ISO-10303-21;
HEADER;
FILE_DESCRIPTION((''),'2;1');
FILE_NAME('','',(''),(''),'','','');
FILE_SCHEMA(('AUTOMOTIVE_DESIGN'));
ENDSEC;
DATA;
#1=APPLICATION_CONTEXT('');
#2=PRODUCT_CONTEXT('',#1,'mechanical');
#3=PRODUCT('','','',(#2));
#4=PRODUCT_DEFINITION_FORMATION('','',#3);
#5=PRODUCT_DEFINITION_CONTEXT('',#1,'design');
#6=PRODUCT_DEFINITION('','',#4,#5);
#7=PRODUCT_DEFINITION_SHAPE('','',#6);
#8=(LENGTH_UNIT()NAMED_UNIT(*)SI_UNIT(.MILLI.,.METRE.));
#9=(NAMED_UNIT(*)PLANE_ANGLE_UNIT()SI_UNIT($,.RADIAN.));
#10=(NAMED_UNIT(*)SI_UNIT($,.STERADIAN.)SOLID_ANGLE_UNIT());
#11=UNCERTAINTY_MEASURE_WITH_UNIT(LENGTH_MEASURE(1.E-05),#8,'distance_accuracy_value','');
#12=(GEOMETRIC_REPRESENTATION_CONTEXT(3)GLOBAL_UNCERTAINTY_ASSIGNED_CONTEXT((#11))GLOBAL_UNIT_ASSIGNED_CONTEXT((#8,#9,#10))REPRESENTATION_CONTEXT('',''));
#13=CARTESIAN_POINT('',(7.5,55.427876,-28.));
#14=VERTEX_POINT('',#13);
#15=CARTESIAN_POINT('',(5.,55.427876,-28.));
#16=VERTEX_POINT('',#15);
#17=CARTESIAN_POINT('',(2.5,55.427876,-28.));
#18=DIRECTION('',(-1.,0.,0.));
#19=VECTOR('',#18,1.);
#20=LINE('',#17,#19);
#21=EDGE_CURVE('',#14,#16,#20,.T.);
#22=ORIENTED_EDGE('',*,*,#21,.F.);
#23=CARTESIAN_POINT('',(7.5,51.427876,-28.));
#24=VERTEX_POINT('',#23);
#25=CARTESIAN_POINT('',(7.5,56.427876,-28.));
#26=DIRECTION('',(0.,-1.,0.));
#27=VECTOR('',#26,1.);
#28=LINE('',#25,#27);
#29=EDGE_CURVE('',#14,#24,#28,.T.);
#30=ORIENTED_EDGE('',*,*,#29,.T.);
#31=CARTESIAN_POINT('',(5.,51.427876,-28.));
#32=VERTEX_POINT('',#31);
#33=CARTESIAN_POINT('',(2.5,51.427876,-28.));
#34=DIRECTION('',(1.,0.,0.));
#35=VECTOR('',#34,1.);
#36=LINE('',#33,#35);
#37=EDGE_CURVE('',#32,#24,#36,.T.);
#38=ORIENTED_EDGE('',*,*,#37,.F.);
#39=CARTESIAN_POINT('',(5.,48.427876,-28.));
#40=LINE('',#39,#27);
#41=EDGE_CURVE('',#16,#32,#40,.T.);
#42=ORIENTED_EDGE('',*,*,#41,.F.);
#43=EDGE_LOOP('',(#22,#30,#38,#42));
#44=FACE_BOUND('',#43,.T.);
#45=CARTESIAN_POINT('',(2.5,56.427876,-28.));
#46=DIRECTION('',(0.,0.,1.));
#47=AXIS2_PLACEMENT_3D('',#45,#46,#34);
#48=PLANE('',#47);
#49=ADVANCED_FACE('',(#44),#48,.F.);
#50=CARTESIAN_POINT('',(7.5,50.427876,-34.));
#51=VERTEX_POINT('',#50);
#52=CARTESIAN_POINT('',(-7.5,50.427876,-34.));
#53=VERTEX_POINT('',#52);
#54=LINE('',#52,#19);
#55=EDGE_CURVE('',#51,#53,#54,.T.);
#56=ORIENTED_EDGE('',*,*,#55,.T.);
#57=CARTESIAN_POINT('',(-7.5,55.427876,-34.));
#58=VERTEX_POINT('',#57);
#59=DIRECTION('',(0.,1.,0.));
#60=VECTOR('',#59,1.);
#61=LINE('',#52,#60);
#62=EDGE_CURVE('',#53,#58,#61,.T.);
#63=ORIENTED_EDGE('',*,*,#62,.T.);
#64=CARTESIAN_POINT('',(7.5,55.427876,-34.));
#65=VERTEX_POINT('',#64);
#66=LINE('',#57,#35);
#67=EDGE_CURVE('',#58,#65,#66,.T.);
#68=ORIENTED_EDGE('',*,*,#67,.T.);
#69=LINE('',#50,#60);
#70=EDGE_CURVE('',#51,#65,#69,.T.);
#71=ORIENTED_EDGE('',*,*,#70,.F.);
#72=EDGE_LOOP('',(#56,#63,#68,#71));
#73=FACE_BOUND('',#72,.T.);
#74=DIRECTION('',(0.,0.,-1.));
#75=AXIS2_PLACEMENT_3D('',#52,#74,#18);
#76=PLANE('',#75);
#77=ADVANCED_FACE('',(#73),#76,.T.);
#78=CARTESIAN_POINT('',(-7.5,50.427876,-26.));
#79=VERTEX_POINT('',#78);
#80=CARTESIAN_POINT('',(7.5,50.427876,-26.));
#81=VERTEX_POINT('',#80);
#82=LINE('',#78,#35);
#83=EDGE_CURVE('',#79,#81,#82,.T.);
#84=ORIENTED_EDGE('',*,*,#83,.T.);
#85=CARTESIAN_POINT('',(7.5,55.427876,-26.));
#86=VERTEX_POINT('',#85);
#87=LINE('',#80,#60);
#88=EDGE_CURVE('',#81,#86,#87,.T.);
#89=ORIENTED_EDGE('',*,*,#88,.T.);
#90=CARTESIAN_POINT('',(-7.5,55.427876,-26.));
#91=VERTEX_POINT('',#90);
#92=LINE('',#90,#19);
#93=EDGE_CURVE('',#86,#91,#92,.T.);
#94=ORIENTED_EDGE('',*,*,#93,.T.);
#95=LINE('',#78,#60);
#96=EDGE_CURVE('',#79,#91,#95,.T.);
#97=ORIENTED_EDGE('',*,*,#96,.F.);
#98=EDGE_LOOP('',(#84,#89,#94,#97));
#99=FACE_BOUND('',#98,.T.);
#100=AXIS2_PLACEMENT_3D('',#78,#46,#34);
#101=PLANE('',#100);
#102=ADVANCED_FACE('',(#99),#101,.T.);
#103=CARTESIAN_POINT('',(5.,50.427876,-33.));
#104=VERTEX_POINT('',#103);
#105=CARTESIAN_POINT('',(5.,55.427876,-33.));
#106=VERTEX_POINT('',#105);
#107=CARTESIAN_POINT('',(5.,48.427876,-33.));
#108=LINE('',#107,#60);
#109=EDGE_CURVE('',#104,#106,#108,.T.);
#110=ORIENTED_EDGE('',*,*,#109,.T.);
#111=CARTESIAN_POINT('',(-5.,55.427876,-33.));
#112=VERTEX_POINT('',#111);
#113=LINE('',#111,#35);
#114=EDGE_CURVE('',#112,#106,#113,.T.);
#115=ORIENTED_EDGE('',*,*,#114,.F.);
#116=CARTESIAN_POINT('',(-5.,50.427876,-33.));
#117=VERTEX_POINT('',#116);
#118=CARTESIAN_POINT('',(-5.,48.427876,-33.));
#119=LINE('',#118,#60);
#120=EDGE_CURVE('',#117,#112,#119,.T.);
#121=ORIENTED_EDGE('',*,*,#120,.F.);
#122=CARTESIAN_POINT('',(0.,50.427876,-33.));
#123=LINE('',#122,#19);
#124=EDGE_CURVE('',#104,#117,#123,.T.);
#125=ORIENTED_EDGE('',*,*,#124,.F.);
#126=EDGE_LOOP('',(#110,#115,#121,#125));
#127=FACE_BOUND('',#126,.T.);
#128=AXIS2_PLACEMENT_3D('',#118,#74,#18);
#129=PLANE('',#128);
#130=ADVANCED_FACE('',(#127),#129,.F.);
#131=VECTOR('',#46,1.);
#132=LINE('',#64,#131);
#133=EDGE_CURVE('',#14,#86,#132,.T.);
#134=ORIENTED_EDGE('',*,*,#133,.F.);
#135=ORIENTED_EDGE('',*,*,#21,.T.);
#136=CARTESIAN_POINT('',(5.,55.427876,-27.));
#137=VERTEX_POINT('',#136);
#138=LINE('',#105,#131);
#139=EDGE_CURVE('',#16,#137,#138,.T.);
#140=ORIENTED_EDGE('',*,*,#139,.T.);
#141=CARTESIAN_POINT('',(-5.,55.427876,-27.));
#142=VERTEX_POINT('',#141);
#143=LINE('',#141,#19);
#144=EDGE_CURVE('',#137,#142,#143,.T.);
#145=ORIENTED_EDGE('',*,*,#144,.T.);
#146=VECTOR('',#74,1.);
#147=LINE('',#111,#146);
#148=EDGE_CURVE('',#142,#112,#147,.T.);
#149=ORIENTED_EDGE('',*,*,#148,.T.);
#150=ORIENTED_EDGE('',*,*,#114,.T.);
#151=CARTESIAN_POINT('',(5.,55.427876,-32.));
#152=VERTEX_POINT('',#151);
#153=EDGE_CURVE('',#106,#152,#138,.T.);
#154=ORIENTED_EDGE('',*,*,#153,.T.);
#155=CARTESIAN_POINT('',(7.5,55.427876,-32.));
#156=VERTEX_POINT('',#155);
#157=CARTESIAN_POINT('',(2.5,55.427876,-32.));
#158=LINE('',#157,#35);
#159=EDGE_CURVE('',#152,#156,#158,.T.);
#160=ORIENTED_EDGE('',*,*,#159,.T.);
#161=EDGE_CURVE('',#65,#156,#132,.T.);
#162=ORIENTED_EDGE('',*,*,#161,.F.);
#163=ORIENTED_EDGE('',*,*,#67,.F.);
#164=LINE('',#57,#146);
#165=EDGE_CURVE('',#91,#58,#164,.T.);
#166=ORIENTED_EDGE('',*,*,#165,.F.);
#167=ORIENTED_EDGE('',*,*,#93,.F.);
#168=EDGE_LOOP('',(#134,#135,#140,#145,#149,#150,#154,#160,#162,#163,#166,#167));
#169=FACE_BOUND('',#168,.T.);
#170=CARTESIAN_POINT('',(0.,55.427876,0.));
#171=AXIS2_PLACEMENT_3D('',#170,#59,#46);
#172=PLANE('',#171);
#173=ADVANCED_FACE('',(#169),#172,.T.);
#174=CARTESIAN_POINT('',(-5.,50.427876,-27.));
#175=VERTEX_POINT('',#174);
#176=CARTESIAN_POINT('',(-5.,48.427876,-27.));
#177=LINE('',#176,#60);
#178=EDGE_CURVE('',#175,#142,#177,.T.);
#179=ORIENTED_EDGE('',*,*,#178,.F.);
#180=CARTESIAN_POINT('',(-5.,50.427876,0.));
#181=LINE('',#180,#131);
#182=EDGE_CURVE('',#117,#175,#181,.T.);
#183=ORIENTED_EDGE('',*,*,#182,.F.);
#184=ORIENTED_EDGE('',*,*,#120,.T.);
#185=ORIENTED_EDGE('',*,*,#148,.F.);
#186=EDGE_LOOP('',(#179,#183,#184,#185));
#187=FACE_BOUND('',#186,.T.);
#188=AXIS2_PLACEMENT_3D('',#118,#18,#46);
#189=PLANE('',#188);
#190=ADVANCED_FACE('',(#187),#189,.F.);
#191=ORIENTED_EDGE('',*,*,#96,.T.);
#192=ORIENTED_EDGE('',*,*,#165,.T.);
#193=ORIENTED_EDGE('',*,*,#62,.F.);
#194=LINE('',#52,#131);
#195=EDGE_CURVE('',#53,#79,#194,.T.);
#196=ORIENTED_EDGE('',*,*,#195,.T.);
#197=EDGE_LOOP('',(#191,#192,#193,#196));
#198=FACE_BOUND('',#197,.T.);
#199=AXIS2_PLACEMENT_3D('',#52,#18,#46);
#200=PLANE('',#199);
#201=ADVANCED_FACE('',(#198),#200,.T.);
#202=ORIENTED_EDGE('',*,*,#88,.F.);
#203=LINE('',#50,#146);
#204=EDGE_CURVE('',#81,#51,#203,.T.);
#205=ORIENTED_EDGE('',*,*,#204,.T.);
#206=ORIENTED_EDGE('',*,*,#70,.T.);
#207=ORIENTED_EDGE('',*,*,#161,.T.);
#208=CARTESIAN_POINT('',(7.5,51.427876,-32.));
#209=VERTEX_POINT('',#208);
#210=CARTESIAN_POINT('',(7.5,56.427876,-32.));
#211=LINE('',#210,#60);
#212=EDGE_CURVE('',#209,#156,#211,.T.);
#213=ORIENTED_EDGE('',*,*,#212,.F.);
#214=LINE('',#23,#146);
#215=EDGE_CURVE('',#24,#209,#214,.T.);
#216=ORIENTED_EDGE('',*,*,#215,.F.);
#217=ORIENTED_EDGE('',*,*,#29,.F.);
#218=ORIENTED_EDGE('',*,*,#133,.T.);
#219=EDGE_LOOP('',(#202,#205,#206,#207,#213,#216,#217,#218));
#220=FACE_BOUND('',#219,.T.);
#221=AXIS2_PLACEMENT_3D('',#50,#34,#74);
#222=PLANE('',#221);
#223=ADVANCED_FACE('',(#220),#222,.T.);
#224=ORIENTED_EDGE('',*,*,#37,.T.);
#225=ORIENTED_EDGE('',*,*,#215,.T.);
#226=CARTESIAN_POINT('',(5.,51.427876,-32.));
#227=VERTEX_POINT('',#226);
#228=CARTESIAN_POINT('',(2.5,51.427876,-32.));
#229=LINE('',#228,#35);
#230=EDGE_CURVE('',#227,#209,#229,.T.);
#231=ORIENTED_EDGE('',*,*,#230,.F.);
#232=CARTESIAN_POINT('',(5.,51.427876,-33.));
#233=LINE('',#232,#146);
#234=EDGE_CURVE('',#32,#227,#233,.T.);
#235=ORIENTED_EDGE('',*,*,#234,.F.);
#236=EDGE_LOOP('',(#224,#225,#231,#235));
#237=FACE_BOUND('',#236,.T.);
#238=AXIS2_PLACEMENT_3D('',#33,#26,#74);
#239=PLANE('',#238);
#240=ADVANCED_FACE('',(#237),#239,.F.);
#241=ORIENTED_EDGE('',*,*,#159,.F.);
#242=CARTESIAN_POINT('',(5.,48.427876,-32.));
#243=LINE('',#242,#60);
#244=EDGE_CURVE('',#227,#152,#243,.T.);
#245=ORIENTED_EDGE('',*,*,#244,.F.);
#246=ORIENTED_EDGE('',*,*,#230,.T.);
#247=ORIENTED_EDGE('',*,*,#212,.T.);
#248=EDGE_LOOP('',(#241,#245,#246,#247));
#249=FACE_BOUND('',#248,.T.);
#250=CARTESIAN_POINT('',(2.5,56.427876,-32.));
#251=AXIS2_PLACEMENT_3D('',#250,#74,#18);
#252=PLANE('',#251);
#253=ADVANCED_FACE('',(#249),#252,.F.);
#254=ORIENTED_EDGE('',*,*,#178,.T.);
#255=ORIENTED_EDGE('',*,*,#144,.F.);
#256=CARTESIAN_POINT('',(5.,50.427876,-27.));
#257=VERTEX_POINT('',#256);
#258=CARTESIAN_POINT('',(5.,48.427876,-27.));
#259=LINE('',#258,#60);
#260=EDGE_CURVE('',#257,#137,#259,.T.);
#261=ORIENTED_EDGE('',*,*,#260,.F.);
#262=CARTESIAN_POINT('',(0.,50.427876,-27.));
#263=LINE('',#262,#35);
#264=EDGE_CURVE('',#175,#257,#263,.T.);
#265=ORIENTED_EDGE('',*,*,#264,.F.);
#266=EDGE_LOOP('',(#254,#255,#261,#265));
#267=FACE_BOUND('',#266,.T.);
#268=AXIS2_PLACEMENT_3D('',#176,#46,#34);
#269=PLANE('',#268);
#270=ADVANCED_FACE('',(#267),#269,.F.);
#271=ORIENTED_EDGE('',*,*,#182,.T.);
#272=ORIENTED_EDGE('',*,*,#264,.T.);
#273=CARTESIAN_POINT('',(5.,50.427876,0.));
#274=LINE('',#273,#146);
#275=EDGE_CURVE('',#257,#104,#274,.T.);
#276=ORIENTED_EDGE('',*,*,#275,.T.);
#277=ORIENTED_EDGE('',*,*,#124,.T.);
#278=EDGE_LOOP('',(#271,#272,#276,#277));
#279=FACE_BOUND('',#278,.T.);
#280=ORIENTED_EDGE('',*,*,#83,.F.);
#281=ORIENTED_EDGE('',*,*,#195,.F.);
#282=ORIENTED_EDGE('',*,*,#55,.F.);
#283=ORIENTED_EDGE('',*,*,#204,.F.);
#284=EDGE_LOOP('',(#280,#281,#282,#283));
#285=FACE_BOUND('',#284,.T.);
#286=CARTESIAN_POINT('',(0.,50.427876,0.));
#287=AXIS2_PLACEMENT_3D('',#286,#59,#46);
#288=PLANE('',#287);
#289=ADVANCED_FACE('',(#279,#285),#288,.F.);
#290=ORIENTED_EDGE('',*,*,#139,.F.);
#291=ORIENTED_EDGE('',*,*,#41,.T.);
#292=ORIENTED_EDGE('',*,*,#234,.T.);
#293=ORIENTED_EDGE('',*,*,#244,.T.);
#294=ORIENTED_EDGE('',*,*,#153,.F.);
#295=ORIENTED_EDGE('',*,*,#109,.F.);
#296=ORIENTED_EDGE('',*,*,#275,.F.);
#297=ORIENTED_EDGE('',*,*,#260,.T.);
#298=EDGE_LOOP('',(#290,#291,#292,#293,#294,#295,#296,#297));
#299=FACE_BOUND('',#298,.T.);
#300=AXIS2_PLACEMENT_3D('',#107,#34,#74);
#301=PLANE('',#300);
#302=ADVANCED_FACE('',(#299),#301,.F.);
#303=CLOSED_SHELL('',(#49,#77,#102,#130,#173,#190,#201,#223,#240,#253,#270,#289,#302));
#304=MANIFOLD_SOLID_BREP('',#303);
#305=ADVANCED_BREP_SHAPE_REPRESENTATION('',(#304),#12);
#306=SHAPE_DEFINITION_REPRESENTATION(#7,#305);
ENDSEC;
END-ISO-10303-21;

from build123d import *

# Parameters (mm, degrees)
CUT_EXTRUDE3_DEPTH           = 60
CUT_EXTRUDE5_DEPTH           = 2
CUT_EXTRUDE5_DEPTH_BACK      = 30
SKETCH9_R                    = 38
SKETCH9_R_2                  = 23
SKETCH19_W                   = 12
SKETCH19_H                   = 36.5
CUT_REVOLVE2_ANGLE           = 65
CUT_REVOLVE2_OTHER_WAY_ANGLE = 65
SKETCH21_W                   = 3.25
SKETCH21_H                   = 4
BOSS_EXTRUDE3_DEPTH          = 1.35
CIRPATTERN1_COUNT            = 5
CUT_EXTRUDE9_START           = -5
CUT_EXTRUDE9_DEPTH           = 5
SKETCH23_R                   = 10.5
CUT_EXTRUDE10_DEPTH          = 10
SKETCH24_W                   = 15
SKETCH24_H                   = 8
BOSS_EXTRUDE4_DEPTH          = 8
SKETCH26_W                   = 10
SKETCH26_H                   = 6
CUT_EXTRUDE11_DEPTH          = 10
SKETCH27_W                   = 4
SKETCH27_H                   = 5
CUT_EXTRUDE12_DEPTH          = 5
CUT_EXTRUDE14_DEPTH          = 2
CUT_EXTRUDE14_DEPTH_BACK     = 30
SKETCH29_R                   = 1
CUT_EXTRUDE15_DEPTH          = 15
FILLET1_R                    = 6
FILLET2_R                    = 8
INTERSECT1_OUTLINE_W         = 15
INTERSECT1_OUTLINE_H         = 8
INTERSECT1_OUTLINE_W_2       = 10
INTERSECT1_OUTLINE_H_2       = 6
INTERSECT1_DEPTH             = 63.427876097
INTERSECT1_START             = 13
INTERSECT1_2_OUTLINE_W       = 15
INTERSECT1_2_OUTLINE_H       = 8
INTERSECT1_2_OUTLINE_W_2     = 10
INTERSECT1_2_OUTLINE_H_2     = 6
INTERSECT1_2_DEPTH           = 12.427876097
INTERSECT1_START_2           = 55.427876097
INTERSECT1_3_OUTLINE_W       = 15
INTERSECT1_3_OUTLINE_H       = 8
INTERSECT1_3_OUTLINE_W_2     = 10
INTERSECT1_3_OUTLINE_H_2     = 6
INTERSECT1_3_DEPTH           = 3


# Read off the part's stored shape, not the designer's step: Cut-Extrude9, Intersect1
with BuildPart() as part:
    # Sketch1 → Revolve1 (revolve)
    with BuildSketch(Plane.XY, mode=Mode.PRIVATE) as revolve1_sk:
        with BuildLine():
            Line((0, 63.427876097), (32, 63.427876097))
            ThreePointArc((32, 63.427876097), (37.656854249, 61.084730346), (40, 55.427876097))
            Line((40, 55.427876097), (40, 28.846818009))
            ThreePointArc((40, 28.846818009), (38.792081772, 24.082439968), (35.460140376, 20.469057744))
            Line((35.460140376, 20.469057744), (28.539859624, 15.958818353))
            ThreePointArc((28.539859624, 15.958818353), (25.207918228, 12.345436129), (24, 7.581058088))
            Line((24, 7.581058088), (24, 3.25))
            Line((24, 3.25), (24.35, 3))
            Line((24.35, 3), (24.35, 0))
            Line((24.35, 0), (22.5, 0))
            Line((22.5, 0), (22.5, 12.5))
            ThreePointArc((22.5, 12.5), (22.353553391, 12.853553391), (22, 13))
            Line((22, 13), (0, 13))
            Line((0, 13), (0, 63.427876097))
        make_face()
    revolve(revolve1_sk.sketch.rotate(Axis((0, 0, 0), (0, 1, 0)), 90), axis=Axis((0, 0, 0), (0, 1, 0)))

    # Sketch11 → Cut-Extrude3 (cut)
    with BuildSketch(Plane(origin=(0, 13, 0), x_dir=(-1, 0, 0), z_dir=(0, -1, 0))):
        with BuildLine():
            Line((-21, 0), (21, 0))
            ThreePointArc((21, 0), (0, 21), (-21, 0))
        make_face()
    extrude(amount=-CUT_EXTRUDE3_DEPTH, mode=Mode.SUBTRACT)

    # Sketch9 → Cut-Extrude5 (cut, two sides: drawn at the far end of the back side and taken through both)
    with BuildSketch(Plane(origin=(0, 55.427876097, 0), x_dir=(1, 0, 0), z_dir=(0, 1, 0)).offset(-CUT_EXTRUDE5_DEPTH_BACK)):
        with Locations(Location((0, 0, 0), (0, 0, 270))):
            Circle(SKETCH9_R)
        with Locations(Location((0, 0, 0), (0, 0, 270))):
            Circle(SKETCH9_R_2, mode=Mode.SUBTRACT)
    extrude(amount=CUT_EXTRUDE5_DEPTH + CUT_EXTRUDE5_DEPTH_BACK, mode=Mode.SUBTRACT)

    # Sketch19 → Cut-Revolve2 (revolve, cut)
    with BuildSketch(Plane(origin=(0, 0, 0), x_dir=(0, 0, -1), z_dir=(1, 0, 0))):
        with Locations((-41.064715832, 37.177876097)):
            Rectangle(SKETCH19_W, SKETCH19_H)
    revolve(axis=Axis((0, 0, 0), (0, 1, 0)), revolution_arc=CUT_REVOLVE2_ANGLE, mode=Mode.SUBTRACT)

    # Sketch19 → Cut-Revolve2 other way (revolve, cut)
    with BuildSketch(Plane(origin=(0, 0, 0), x_dir=(0, 0, -1), z_dir=(1, 0, 0))):
        with Locations((-41.064715832, 37.177876097)):
            Rectangle(SKETCH19_W, SKETCH19_H)
    revolve(axis=Axis((0, 0, 0), (0, -1, 0)), revolution_arc=CUT_REVOLVE2_OTHER_WAY_ANGLE, mode=Mode.SUBTRACT)

    # Sketch21 → Boss-Extrude3 (add)
    with BuildSketch(Plane(origin=(0, 0, 22.5), x_dir=(-1, 0, 0), z_dir=(0, 0, -1))):
        with Locations((0, 2)):
            Rectangle(SKETCH21_W, SKETCH21_H)
    boss_extrude3 = extrude(amount=BOSS_EXTRUDE3_DEPTH)

    # CirPattern1: Boss-Extrude3 ×5 about axis
    cirpattern1_axis = Axis((0, 0, 0), (0, 1, 0))
    for i in range(1, CIRPATTERN1_COUNT):
        add(boss_extrude3.rotate(cirpattern1_axis, i * 360 / CIRPATTERN1_COUNT))

    # Cut-Extrude9 outline → Cut-Extrude9 (cut)
    with BuildSketch(Plane(origin=(0, 63.427876097, 0), x_dir=(1, 0, 0), z_dir=(0, 1, 0)).offset(CUT_EXTRUDE9_START)):
        with BuildLine():
            ThreePointArc((40, 0), (0, 40), (-40, 0))
            Line((-40, 0), (-21, 0))
            ThreePointArc((-21, 0), (0, 21), (21, 0))
            Line((21, 0), (40, 0))
        make_face()
    extrude(amount=CUT_EXTRUDE9_DEPTH, mode=Mode.SUBTRACT)

    # Sketch23 → Cut-Extrude10 (cut)
    with BuildSketch(Plane(origin=(0, 0, -40), x_dir=(-1, 0, 0), z_dir=(0, 0, -1))):
        with Locations((0, 42.137876097)):
            Circle(SKETCH23_R)
    extrude(amount=-CUT_EXTRUDE10_DEPTH, mode=Mode.SUBTRACT)

    # Sketch24 → Boss-Extrude4 (add)
    with BuildSketch(Plane(origin=(0, 58.427876097, 0), x_dir=(1, 0, 0), z_dir=(0, 1, 0))):
        with Locations((0, 30)):
            Rectangle(SKETCH24_W, SKETCH24_H)
    extrude(amount=-BOSS_EXTRUDE4_DEPTH)

    # Sketch26 → Cut-Extrude11 (cut)
    with BuildSketch(Plane(origin=(0, 58.427876097, 0), x_dir=(1, 0, 0), z_dir=(0, 1, 0))):
        with Locations((0, 30)):
            Rectangle(SKETCH26_W, SKETCH26_H)
    extrude(amount=-CUT_EXTRUDE11_DEPTH, mode=Mode.SUBTRACT)

    # Sketch27 → Cut-Extrude12 (cut)
    with BuildSketch(Plane(origin=(7.5, 0, 0), x_dir=(0, 0, -1), z_dir=(1, 0, 0))):
        with Locations((30, 53.927876097)):
            Rectangle(SKETCH27_W, SKETCH27_H)
    extrude(amount=-CUT_EXTRUDE12_DEPTH, mode=Mode.SUBTRACT)

    # Sketch28 → Cut-Extrude14 (cut, two sides: drawn at the far end of the back side and taken through both)
    with BuildSketch(Plane(origin=(0, 55.427876097, 0), x_dir=(1, 0, 0), z_dir=(0, 1, 0)).offset(-CUT_EXTRUDE14_DEPTH_BACK)):
        with BuildLine():
            Line((-22.912878475, -2), (22.912878475, -2))
            ThreePointArc((22.912878475, -2), (0, -23), (-22.912878475, -2))
        make_face()
    extrude(amount=CUT_EXTRUDE14_DEPTH + CUT_EXTRUDE14_DEPTH_BACK, mode=Mode.SUBTRACT)

    # Sketch29 → Cut-Extrude15 (cut)
    with BuildSketch(Plane(origin=(0, 0, 0), x_dir=(-1, 0, 0), z_dir=(0, 0, -1))):
        with Locations((-30.416198487, 60.927876097)):
            Circle(SKETCH29_R)
        with Locations((30.416198487, 60.927876097)):
            Circle(SKETCH29_R)
        with Locations((0, 60.927876097)):
            Circle(SKETCH29_R)
    extrude(amount=-CUT_EXTRUDE15_DEPTH, mode=Mode.SUBTRACT)

    # Fillet1
    fillet1_edges = [part.edges().sort_by_distance(p)[0] for p in [
        (21, 35.713938048, 0),
        (-21, 35.713938048, 0),
    ]]
    fillet(fillet1_edges, radius=FILLET1_R)

    # Fillet2
    fillet2_edges = [part.edges().sort_by_distance(p)[0] for p in [
        (-22.912878475, 41.427876097, 2),
        (22.912878475, 41.427876097, 2),
    ]]
    fillet(fillet2_edges, radius=FILLET2_R)

    # Intersect1 outline → Intersect1 (cut)
    # profile 1 of 2: a face of its own
    with BuildSketch(Plane(origin=(0, 0, 0), x_dir=(1, 0, 0), z_dir=(0, 1, 0))):
        with BuildLine():
            Line((-37.080992435, -15), (-40.906642577, -15))
            Line((-40.906642577, -15), (-42, -15.355253362))
            Line((-42, -15.355253362), (-42, -42))
            Line((-42, -42), (42, -42))
            Line((42, -42), (42, -15.355253362))
            Line((42, -15.355253362), (40.906642577, -15))
            Line((40.906642577, -15), (37.080992435, -15))
            ThreePointArc((37.080992435, -15), (0, 40), (-37.080992435, -15))
        make_face()
        with BuildLine():
            ThreePointArc((19.246817919, 8.4), (18.767687244, 2.713664655), (13.747727085, 0))
            Line((13.747727085, 0), (-13.747727085, 0))
            ThreePointArc((-13.747727085, 0), (-18.767687244, 2.713664655), (-19.246817919, 8.4))
            ThreePointArc((-19.246817919, 8.4), (0, 21), (19.246817919, 8.4))
        make_face(mode=Mode.SUBTRACT)
        with Locations((0, 30)):
            Rectangle(INTERSECT1_OUTLINE_W, INTERSECT1_OUTLINE_H, mode=Mode.SUBTRACT)
    # profile 2 of 2: a face of its own
    with BuildSketch(Plane(origin=(0, 0, 0), x_dir=(1, 0, 0), z_dir=(0, 1, 0))):
        with Locations((0, 30)):
            Rectangle(INTERSECT1_OUTLINE_W_2, INTERSECT1_OUTLINE_H_2)
    extrude(amount=INTERSECT1_DEPTH, mode=Mode.SUBTRACT)

    # Intersect1 2 outline → Intersect1 2 (cut)
    with BuildSketch(Plane(origin=(0, 0, 0), x_dir=(1, 0, 0), z_dir=(0, 1, 0)).offset(INTERSECT1_START)):
        with Locations((0, 30)):
            Rectangle(INTERSECT1_2_OUTLINE_W, INTERSECT1_2_OUTLINE_H)
        with Locations((0, 30)):
            Rectangle(INTERSECT1_2_OUTLINE_W_2, INTERSECT1_2_OUTLINE_H_2, mode=Mode.SUBTRACT)
    extrude(amount=INTERSECT1_2_DEPTH, mode=Mode.SUBTRACT)

    # Intersect1 3 outline → Intersect1 3 (cut)
    with BuildSketch(Plane(origin=(0, 0, 0), x_dir=(1, 0, 0), z_dir=(0, 1, 0)).offset(INTERSECT1_START_2)):
        with Locations((0, 30)):
            Rectangle(INTERSECT1_3_OUTLINE_W, INTERSECT1_3_OUTLINE_H)
        with Locations((0, 30)):
            Rectangle(INTERSECT1_3_OUTLINE_W_2, INTERSECT1_3_OUTLINE_H_2, mode=Mode.SUBTRACT)
    extrude(amount=INTERSECT1_3_DEPTH, mode=Mode.SUBTRACT)


solid = part.part
